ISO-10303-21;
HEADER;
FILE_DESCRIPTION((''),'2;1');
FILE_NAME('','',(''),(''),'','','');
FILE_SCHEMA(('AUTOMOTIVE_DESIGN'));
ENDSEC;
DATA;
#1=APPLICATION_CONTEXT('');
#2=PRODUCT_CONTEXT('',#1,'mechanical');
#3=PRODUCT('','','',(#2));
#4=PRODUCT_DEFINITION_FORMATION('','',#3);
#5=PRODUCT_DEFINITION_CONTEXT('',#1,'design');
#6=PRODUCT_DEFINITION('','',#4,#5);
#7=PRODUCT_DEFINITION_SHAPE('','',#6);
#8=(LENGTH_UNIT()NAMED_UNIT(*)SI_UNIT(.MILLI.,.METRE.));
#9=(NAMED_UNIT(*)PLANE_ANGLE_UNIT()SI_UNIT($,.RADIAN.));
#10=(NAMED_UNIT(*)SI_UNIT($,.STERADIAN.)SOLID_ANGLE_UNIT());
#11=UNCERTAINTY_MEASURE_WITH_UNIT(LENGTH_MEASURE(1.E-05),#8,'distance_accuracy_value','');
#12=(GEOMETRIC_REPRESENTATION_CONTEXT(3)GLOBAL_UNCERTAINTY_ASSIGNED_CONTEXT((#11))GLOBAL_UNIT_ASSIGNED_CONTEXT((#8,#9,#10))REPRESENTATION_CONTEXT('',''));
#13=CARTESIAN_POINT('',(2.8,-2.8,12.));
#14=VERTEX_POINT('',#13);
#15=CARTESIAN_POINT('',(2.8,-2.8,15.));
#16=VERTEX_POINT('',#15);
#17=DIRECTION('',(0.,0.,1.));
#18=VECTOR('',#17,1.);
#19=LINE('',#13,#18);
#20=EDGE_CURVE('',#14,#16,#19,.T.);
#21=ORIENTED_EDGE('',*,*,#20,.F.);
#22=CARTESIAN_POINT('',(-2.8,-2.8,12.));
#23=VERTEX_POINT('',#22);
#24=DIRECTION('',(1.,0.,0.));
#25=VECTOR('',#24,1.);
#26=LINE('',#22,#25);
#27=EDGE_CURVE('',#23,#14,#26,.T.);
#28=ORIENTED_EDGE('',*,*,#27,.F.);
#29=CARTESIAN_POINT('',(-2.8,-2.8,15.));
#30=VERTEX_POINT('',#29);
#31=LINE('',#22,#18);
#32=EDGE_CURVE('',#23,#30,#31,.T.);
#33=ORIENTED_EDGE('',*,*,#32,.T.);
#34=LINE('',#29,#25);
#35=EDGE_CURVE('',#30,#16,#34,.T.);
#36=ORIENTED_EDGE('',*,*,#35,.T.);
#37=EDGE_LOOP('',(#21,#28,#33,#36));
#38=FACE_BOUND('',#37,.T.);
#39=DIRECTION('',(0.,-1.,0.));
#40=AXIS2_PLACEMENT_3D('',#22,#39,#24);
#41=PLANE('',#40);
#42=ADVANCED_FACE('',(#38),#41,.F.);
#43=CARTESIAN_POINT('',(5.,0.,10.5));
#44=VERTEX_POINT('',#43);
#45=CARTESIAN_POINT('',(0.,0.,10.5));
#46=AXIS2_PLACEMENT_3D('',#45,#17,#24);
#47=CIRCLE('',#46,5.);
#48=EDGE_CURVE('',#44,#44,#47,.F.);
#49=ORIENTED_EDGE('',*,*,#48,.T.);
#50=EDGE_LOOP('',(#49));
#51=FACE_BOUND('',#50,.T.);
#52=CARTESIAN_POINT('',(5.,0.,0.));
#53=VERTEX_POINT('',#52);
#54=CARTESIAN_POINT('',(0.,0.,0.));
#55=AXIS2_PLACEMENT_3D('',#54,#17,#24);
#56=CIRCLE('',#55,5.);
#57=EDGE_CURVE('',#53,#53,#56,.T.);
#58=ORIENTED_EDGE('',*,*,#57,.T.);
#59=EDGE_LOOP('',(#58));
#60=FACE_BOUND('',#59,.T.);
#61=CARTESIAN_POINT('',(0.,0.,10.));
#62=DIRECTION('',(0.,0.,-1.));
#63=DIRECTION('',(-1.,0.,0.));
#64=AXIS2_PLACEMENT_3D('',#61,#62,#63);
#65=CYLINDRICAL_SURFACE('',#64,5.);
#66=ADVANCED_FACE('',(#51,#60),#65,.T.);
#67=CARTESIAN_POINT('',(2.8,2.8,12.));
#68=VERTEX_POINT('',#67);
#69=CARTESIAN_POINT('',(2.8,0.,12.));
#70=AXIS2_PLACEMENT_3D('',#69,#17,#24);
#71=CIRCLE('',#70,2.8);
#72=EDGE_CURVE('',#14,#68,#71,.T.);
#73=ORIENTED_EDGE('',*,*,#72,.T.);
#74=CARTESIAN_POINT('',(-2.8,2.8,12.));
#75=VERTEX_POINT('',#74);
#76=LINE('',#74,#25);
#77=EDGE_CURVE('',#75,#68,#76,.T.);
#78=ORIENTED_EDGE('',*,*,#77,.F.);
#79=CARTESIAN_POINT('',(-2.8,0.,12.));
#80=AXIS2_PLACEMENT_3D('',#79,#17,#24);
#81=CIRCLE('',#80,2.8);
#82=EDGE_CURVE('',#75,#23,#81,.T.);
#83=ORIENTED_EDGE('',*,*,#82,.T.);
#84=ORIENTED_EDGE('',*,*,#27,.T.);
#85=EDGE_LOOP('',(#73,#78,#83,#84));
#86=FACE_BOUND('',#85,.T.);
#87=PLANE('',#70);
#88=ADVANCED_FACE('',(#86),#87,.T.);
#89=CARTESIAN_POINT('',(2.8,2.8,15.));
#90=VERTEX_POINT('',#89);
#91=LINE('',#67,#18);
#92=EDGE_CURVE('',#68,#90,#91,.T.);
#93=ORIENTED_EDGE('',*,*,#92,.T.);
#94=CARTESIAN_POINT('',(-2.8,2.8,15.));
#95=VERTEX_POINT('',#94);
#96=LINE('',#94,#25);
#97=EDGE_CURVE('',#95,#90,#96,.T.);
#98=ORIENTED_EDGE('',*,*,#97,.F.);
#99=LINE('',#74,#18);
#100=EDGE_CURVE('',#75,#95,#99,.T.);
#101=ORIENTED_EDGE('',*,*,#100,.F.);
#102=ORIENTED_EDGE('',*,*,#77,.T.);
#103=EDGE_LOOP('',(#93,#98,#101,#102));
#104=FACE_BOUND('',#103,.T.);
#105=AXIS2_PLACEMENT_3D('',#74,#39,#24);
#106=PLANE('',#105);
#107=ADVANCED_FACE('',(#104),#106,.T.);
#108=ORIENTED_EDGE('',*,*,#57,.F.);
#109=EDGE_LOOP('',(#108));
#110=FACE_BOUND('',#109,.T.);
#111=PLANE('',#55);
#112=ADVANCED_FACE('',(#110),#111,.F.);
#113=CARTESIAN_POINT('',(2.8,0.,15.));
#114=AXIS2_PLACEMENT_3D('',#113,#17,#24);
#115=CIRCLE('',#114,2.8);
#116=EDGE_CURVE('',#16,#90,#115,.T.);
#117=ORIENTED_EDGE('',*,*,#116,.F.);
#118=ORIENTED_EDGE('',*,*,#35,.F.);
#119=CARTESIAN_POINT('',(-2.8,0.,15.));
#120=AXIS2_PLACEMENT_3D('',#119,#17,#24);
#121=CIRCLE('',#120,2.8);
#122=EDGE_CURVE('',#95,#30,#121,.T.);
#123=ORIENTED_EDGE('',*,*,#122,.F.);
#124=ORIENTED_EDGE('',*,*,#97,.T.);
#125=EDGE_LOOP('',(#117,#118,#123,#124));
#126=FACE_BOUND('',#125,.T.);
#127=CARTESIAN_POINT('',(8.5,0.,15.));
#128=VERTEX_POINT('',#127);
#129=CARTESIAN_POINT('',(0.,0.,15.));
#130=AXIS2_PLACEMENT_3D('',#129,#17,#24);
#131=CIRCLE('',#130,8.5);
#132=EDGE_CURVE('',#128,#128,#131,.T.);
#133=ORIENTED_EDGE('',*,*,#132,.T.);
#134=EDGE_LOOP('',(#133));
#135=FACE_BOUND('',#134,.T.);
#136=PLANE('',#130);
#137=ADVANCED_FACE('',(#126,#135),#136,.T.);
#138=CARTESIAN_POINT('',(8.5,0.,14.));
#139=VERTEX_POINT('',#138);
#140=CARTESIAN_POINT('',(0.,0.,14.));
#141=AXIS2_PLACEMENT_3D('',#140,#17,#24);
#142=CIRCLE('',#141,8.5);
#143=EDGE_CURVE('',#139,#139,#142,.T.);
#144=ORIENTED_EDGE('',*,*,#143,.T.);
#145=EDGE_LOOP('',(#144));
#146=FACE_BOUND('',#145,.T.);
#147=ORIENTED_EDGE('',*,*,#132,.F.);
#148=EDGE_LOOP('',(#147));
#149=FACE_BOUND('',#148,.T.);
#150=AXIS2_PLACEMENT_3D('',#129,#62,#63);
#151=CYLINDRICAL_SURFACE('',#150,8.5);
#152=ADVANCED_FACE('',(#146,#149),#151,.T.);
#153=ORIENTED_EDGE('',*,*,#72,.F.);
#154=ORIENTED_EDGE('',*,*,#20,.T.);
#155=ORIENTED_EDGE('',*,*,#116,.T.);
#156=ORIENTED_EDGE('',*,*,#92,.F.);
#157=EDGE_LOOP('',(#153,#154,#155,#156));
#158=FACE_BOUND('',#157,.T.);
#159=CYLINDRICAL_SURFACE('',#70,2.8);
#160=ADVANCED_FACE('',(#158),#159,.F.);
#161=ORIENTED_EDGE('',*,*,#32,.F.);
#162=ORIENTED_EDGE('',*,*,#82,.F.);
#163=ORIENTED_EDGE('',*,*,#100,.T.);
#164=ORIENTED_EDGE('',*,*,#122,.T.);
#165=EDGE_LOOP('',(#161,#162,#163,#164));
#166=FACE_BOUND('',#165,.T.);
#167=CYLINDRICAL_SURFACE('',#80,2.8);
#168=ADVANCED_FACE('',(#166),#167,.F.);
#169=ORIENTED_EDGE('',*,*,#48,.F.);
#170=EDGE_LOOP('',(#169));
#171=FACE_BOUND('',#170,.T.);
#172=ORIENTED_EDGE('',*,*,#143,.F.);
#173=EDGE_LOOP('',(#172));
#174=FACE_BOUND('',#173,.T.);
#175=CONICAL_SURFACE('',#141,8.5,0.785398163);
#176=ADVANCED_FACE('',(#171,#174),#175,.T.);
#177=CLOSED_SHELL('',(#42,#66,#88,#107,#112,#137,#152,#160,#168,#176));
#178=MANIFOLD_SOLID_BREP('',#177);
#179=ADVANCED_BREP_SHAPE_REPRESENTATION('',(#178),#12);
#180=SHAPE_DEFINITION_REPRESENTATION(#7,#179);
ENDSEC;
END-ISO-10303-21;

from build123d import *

# Parameters (mm, degrees)
SKETCH1_R           = 5
BOSS_EXTRUDE1_DEPTH = 10
SKETCH2_R           = 8.5
BOSS_EXTRUDE2_DEPTH = 5
CUT_EXTRUDE1_DEPTH  = 3
CHAMFER1_SIZE       = 4


with BuildPart() as part:
    # Sketch1 → Boss-Extrude1 (new body)
    with BuildSketch(Plane.XY):
        Circle(SKETCH1_R)
    extrude(amount=BOSS_EXTRUDE1_DEPTH)

    # Sketch2 → Boss-Extrude2 (add)
    with BuildSketch(Plane.XY.offset(10)):
        Circle(SKETCH2_R)
    extrude(amount=BOSS_EXTRUDE2_DEPTH)

    # Sketch3 → Cut-Extrude1 (cut)
    with BuildSketch(Plane.XY.offset(15)):
        with BuildLine():
            Line((-2.8, 2.8), (2.8, 2.8))
            ThreePointArc((2.8, 2.8), (5.6, 0), (2.8, -2.8))
            Line((2.8, -2.8), (-2.8, -2.8))
            ThreePointArc((-2.8, -2.8), (-5.6, 0), (-2.8, 2.8))
        make_face()
    extrude(amount=-CUT_EXTRUDE1_DEPTH, mode=Mode.SUBTRACT)

    # Chamfer1
    # the kernel refuses this chamfer: 4 mm, written as the material it takes off along each edge
    with BuildSketch(Plane(origin=(0, 0, 10), x_dir=(1, 0, 0), z_dir=(0, -1, 0))) as chamfer1_piece_1_section:
        Polygon((8.5, CHAMFER1_SIZE), (8.5 - CHAMFER1_SIZE, 0), (8.5, 0), align=None)
    chamfer1_piece_1 = revolve(axis=Axis((0, 0, 10), (0, 0, 1)), mode=Mode.PRIVATE)
    chamfer1_piece_1 = chamfer1_piece_1 - Plane(origin=(0, 0, 12.254882924), x_dir=(1, 0, 0), z_dir=(0, 0, -1)) * Cylinder(5, 34, mode=Mode.PRIVATE)
    add(chamfer1_piece_1, mode=Mode.SUBTRACT)


solid = part.part
